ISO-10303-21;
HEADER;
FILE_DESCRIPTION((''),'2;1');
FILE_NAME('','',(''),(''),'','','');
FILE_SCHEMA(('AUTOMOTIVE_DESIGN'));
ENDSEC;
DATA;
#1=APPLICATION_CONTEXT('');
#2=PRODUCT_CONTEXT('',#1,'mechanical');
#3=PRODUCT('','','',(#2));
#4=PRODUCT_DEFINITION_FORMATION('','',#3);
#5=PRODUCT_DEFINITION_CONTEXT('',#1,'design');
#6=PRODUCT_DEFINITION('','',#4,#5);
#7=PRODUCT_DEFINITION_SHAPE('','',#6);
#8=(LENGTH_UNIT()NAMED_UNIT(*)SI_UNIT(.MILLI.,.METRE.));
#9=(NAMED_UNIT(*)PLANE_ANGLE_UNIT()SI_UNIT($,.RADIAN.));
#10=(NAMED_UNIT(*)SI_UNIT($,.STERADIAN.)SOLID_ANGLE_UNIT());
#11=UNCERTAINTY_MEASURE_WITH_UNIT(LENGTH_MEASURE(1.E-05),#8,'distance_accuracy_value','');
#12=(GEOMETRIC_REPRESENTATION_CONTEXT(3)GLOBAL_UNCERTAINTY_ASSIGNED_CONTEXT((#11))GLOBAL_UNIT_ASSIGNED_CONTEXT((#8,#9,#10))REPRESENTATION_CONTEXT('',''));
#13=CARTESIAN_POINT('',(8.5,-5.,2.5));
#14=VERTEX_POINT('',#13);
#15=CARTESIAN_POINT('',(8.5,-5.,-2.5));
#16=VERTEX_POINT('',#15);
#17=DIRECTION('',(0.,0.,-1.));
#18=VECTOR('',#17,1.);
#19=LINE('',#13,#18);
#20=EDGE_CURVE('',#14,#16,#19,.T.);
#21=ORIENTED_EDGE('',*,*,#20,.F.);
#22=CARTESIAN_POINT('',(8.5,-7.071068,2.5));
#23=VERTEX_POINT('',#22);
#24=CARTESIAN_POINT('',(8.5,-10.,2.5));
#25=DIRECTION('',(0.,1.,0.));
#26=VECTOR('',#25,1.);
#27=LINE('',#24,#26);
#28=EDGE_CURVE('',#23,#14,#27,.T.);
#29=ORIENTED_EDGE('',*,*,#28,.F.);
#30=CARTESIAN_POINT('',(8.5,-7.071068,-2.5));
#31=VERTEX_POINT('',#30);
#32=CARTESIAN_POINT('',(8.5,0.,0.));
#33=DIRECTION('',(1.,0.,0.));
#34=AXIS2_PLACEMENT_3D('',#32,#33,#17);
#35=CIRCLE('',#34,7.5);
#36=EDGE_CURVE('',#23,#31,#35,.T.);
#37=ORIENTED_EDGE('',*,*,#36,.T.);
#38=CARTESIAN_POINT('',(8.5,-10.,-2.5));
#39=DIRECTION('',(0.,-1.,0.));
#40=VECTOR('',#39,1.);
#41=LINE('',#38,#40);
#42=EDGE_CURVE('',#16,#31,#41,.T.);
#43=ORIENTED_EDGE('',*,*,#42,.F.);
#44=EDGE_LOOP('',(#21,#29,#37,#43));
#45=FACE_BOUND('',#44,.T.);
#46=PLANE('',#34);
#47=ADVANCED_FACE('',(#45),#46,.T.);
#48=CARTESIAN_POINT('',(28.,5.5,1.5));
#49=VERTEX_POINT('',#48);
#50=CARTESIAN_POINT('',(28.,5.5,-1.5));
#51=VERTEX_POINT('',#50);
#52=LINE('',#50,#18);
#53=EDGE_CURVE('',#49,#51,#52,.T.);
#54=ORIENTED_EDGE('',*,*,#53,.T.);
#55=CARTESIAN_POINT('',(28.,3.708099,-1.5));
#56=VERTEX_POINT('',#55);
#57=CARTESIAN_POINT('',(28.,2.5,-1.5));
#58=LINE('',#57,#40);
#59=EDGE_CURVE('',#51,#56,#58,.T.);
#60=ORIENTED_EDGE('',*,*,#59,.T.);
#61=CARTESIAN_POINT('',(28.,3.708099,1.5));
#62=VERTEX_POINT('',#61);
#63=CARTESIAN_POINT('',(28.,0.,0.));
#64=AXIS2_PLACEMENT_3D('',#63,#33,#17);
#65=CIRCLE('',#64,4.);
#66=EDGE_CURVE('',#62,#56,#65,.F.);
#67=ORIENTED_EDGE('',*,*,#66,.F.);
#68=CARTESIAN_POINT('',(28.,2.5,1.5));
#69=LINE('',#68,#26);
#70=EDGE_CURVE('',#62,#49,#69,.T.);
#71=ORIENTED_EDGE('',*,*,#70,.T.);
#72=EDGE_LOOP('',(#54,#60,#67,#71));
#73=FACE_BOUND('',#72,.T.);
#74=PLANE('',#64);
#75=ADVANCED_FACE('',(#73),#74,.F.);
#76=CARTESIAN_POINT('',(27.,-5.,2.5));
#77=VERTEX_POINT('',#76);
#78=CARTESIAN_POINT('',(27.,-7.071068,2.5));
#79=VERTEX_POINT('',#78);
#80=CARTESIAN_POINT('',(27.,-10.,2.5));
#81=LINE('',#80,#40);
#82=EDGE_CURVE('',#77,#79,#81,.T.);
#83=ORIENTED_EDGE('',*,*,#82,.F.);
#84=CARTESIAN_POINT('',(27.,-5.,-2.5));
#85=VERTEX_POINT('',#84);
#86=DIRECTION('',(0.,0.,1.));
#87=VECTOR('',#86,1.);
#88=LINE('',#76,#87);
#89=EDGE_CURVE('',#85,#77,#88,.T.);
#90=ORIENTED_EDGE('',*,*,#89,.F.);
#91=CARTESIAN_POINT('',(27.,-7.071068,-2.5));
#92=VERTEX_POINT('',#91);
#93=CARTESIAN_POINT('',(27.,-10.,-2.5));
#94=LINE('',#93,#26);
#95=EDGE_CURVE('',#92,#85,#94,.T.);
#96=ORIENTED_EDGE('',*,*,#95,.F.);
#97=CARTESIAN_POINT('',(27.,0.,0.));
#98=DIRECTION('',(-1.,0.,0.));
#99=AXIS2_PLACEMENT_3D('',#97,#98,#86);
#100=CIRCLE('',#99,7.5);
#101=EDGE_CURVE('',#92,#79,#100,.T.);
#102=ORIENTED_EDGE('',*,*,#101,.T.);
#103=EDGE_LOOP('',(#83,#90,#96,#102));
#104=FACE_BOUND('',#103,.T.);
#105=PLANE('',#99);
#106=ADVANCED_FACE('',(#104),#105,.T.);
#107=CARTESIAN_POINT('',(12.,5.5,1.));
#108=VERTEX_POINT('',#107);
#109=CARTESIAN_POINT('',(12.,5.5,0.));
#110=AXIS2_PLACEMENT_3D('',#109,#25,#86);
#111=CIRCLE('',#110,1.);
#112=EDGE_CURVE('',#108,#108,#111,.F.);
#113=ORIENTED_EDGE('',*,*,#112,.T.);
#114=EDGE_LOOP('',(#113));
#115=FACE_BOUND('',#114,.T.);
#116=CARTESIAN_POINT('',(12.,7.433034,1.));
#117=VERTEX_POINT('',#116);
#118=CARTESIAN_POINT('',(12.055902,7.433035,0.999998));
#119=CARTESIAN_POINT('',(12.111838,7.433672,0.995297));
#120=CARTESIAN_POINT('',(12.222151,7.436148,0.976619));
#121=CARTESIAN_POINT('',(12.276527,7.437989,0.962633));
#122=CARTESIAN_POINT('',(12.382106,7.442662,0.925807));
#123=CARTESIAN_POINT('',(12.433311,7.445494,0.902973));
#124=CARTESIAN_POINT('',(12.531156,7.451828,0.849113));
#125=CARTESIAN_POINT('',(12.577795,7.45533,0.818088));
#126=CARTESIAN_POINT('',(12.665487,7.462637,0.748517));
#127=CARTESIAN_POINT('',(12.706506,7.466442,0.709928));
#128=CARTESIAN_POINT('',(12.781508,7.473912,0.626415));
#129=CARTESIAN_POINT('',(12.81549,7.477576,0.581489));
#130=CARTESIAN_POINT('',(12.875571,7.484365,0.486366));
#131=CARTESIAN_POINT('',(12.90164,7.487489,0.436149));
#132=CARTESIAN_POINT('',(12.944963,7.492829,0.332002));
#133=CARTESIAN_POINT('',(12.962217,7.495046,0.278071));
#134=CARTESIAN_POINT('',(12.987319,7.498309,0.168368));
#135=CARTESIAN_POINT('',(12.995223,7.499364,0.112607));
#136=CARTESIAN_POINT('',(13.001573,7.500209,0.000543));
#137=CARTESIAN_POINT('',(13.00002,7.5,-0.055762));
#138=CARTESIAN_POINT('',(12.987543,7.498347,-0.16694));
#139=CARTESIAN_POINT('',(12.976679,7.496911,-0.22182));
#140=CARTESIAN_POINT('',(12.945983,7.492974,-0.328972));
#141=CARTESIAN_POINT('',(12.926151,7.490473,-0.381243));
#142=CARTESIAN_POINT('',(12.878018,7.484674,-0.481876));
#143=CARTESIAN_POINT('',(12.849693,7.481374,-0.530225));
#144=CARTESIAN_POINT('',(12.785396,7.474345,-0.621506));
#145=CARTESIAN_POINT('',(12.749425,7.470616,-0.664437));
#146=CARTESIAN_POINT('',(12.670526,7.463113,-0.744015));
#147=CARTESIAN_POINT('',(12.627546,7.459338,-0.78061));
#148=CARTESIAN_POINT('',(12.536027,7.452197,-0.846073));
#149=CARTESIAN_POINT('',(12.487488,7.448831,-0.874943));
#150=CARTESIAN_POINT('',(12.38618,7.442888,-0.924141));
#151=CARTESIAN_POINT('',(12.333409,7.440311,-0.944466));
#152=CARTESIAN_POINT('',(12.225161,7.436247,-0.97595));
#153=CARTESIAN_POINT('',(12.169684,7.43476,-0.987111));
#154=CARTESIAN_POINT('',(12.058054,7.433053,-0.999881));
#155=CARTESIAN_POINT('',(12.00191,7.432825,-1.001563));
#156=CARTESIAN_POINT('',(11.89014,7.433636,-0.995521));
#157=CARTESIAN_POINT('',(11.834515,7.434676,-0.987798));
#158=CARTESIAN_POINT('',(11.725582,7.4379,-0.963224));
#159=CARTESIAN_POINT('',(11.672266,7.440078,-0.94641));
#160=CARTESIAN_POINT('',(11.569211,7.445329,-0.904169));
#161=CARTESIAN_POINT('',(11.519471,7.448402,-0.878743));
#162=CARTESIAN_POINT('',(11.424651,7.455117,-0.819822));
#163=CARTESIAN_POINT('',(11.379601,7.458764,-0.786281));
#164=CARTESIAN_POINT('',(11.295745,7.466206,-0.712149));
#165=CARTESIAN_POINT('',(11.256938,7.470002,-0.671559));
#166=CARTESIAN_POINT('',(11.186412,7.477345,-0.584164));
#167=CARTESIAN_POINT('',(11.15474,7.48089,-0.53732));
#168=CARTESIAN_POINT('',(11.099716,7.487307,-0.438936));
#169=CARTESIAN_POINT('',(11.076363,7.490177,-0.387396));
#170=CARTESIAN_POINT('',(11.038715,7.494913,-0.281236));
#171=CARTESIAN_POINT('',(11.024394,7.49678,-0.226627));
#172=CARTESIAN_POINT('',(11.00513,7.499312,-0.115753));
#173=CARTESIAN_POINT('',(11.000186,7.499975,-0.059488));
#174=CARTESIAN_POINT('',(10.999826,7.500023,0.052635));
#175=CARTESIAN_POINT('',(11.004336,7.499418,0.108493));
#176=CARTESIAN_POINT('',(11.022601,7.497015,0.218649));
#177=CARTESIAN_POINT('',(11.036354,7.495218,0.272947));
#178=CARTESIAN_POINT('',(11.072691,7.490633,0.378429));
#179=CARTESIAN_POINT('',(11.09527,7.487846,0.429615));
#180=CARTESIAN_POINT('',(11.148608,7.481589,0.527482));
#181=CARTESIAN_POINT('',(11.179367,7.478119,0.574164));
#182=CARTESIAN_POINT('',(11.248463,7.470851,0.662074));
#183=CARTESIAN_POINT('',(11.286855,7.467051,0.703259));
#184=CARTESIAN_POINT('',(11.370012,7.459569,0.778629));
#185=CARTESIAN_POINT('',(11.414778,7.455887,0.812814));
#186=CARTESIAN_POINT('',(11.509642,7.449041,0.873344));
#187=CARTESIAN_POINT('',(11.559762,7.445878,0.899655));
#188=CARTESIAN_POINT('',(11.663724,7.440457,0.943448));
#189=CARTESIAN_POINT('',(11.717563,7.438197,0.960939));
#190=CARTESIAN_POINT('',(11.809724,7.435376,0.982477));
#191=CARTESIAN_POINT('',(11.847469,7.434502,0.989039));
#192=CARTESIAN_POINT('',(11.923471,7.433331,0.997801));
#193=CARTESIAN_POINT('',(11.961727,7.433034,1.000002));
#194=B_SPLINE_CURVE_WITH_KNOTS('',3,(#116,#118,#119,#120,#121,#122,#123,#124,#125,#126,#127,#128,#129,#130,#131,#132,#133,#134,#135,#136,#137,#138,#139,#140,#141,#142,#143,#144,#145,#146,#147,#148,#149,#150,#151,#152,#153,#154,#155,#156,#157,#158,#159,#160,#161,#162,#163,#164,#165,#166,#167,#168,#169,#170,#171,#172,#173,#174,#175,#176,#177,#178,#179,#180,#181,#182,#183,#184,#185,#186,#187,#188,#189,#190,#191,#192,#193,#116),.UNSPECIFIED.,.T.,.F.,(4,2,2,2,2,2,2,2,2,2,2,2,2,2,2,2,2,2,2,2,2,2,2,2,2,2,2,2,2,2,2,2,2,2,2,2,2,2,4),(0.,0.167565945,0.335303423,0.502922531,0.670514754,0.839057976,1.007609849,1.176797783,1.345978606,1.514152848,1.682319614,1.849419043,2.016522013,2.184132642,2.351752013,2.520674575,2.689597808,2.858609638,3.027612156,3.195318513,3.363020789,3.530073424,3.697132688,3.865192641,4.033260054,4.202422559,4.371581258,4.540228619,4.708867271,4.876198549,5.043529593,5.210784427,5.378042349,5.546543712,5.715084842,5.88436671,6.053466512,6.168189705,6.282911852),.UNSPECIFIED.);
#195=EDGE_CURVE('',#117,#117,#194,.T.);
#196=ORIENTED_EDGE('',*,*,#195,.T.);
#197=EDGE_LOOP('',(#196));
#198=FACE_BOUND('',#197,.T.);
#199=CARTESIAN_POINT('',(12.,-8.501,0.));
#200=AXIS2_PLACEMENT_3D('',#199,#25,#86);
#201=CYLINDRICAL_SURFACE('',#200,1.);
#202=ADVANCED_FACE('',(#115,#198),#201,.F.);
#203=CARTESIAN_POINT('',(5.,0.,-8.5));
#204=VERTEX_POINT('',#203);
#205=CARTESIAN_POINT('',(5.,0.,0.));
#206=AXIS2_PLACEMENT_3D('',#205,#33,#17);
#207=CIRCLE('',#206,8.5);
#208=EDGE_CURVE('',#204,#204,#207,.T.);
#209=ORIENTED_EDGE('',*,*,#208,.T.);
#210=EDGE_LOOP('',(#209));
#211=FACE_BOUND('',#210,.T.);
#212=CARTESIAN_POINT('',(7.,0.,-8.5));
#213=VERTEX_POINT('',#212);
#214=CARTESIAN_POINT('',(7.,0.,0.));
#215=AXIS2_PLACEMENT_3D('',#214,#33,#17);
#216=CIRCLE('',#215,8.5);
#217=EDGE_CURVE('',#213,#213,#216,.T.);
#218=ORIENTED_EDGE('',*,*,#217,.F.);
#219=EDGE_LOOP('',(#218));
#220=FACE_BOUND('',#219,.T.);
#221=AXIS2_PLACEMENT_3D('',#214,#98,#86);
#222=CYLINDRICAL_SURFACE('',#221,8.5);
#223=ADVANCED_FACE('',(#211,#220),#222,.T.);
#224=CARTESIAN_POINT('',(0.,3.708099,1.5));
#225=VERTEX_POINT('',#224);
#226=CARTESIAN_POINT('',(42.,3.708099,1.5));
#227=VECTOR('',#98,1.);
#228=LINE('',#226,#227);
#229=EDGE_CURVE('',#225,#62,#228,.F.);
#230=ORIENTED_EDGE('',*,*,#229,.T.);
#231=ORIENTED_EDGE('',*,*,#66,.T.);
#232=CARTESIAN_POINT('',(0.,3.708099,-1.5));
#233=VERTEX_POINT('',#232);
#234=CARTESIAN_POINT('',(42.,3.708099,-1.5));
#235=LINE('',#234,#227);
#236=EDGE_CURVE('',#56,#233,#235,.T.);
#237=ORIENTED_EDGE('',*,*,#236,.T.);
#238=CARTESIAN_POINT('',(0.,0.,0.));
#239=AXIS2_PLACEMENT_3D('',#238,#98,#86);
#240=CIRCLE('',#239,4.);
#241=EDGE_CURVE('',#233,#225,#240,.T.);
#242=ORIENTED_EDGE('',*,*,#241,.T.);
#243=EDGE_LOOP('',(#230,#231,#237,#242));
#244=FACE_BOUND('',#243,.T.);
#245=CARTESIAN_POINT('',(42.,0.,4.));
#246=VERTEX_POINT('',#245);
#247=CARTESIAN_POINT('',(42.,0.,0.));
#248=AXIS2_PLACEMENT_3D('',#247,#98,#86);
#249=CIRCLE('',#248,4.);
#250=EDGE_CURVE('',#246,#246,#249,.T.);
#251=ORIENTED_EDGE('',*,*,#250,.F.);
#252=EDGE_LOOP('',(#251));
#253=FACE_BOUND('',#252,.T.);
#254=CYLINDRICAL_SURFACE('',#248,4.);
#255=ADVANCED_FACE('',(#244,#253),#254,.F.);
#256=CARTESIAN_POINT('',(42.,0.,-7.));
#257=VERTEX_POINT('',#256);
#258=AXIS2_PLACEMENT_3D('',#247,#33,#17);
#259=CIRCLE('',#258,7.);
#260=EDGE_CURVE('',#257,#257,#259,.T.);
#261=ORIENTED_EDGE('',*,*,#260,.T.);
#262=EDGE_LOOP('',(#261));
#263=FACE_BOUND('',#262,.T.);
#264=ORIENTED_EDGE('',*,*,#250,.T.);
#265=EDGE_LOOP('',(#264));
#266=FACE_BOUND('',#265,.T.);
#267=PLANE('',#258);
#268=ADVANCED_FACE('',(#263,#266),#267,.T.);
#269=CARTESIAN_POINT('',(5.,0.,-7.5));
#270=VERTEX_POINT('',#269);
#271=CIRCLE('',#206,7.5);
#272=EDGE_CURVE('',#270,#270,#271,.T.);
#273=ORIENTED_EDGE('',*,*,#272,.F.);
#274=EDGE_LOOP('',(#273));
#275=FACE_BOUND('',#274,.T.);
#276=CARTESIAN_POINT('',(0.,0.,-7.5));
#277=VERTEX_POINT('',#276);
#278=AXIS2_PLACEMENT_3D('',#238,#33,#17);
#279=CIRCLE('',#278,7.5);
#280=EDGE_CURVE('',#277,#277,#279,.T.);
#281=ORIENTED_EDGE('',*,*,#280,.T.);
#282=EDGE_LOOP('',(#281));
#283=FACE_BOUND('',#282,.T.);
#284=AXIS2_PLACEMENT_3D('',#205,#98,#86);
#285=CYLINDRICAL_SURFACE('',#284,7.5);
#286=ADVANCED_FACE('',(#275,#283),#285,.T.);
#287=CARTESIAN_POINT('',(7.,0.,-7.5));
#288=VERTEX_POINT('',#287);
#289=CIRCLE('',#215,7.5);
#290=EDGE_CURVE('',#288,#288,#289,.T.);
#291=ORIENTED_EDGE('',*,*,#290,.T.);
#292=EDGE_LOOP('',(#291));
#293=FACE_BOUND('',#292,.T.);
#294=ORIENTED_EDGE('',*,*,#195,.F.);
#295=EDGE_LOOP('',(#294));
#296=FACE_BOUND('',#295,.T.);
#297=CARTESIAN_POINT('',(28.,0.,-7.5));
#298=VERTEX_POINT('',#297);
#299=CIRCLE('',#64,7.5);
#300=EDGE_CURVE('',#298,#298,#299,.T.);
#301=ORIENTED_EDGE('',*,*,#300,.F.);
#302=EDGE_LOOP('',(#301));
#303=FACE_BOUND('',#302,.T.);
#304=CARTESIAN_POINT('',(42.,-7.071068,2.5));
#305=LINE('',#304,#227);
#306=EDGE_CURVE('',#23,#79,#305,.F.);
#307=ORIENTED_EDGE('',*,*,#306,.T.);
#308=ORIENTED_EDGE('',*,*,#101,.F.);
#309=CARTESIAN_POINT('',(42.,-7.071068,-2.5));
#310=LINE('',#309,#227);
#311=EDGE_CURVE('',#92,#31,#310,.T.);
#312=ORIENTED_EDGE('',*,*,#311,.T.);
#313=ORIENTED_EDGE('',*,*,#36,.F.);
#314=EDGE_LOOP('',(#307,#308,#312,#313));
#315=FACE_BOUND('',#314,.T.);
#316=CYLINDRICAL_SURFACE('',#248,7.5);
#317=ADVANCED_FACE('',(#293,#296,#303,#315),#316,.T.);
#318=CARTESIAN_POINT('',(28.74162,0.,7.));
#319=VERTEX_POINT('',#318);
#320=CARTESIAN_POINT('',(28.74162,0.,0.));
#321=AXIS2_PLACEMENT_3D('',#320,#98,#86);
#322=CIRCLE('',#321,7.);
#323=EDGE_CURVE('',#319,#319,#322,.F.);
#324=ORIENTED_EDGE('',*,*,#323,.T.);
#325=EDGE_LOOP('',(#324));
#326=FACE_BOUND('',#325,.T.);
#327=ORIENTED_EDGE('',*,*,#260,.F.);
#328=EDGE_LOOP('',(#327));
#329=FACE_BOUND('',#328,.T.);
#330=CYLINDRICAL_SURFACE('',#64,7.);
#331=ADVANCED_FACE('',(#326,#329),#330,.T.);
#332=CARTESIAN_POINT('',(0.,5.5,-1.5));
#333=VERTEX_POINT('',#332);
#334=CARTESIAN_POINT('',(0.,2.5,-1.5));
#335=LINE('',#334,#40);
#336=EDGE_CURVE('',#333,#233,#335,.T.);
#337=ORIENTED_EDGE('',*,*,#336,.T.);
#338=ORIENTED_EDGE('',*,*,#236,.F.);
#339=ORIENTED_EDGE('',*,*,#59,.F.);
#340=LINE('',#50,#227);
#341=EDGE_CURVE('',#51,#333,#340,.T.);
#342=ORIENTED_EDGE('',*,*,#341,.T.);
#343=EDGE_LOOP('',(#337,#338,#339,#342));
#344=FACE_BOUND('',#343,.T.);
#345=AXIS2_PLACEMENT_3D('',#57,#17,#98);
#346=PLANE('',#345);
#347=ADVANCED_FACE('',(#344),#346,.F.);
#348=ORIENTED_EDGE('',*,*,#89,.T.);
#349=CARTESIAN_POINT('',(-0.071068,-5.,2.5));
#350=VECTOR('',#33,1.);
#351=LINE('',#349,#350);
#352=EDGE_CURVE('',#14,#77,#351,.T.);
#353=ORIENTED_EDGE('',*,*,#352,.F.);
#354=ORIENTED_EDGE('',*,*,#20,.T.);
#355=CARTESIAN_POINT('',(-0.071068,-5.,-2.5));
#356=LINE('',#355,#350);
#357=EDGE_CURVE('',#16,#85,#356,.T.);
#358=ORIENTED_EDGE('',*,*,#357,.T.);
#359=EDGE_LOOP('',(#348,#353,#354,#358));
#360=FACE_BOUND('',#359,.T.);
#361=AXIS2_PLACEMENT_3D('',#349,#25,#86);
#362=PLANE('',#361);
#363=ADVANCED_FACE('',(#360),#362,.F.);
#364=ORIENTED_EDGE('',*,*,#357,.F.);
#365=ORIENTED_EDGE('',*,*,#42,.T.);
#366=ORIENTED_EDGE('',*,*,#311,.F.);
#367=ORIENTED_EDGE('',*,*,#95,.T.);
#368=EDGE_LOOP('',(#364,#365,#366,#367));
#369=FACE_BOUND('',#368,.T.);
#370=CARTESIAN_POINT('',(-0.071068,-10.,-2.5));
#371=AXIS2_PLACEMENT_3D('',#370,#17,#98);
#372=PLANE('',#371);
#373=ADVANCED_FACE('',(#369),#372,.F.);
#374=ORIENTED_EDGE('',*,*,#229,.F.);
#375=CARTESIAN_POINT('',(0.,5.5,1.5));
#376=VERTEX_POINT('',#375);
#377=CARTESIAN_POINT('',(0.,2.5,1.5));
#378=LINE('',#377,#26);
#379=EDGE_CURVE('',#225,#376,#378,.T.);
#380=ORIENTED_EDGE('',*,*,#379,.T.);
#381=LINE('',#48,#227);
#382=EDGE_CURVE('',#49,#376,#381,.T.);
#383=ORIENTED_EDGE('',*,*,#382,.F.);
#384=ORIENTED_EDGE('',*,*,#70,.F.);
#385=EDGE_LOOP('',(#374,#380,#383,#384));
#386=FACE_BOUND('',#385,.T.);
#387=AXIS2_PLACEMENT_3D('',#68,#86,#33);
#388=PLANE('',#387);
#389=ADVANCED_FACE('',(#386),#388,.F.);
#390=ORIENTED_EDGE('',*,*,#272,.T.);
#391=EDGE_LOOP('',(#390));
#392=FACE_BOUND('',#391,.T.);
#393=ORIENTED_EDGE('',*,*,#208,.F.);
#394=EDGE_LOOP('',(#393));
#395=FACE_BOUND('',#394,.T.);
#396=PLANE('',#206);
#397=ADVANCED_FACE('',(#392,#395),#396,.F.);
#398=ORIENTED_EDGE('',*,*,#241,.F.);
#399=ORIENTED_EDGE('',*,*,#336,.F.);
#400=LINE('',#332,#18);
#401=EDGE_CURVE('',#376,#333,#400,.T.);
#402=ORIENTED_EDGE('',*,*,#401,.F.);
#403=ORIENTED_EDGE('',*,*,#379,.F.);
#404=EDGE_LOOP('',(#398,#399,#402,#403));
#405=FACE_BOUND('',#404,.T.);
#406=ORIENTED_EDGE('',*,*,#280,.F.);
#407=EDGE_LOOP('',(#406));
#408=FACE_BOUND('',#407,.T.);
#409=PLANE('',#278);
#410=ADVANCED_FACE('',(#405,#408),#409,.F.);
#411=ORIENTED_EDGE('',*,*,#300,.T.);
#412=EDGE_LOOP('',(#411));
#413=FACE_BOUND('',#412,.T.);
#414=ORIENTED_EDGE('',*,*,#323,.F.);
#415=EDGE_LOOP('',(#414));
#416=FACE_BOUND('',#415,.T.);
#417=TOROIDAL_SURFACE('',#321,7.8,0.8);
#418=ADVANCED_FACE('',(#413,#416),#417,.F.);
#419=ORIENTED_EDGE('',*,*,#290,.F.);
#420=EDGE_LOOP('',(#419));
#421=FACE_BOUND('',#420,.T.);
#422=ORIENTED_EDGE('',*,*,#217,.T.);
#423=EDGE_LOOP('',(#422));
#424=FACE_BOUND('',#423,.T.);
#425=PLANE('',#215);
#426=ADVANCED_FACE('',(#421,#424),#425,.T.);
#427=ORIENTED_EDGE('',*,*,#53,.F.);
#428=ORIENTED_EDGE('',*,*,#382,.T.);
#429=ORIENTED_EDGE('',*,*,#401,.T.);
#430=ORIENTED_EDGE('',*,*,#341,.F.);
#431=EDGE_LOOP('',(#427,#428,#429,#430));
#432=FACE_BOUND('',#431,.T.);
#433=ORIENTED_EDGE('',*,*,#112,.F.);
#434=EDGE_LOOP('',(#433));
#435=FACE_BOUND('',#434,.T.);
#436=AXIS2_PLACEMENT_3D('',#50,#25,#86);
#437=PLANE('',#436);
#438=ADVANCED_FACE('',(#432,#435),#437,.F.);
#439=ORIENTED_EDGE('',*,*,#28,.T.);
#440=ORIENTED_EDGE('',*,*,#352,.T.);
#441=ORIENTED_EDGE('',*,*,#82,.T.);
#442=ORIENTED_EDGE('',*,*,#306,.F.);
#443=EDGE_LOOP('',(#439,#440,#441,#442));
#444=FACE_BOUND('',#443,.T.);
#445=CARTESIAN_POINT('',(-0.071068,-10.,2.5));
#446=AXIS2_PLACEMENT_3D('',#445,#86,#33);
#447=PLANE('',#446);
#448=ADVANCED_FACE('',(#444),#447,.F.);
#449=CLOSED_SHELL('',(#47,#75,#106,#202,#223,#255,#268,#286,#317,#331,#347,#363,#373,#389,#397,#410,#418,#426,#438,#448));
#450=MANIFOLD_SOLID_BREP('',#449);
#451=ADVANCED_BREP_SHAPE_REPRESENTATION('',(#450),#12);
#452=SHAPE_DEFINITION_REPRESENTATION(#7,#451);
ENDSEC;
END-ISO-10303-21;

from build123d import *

# Parameters (mm, degrees)
SKETCH1_R               = 7.5
BOSS_EXTRUDE1_DEPTH     = 5
SKETCH2_R               = 8.5
BOSS_EXTRUDE2_DEPTH     = 2
SKETCH3_R               = 7.5
BOSS_EXTRUDE3_DEPTH     = 35
SKETCH4_R               = 4
CUT_EXTRUDE1_DEPTH      = 44.686382318
CUT_EXTRUDE3_REACH      = 47.741
CUT_EXTRUDE3_END_RADIUS = 4
SKETCH7_R               = 1
CUT_EXTRUDE6_START      = -14
SKETCH9_R               = 7.5
SKETCH9_R_2             = 7
CUT_EXTRUDE6_DEPTH      = 14
FILLET1_R               = 0.8
SKETCH10_W              = 3
SKETCH10_H              = 3
CUT_EXTRUDE7_DEPTH      = 28
SKETCH12_W              = 5
SKETCH12_H              = 5
CUT_EXTRUDE8_DEPTH      = 18.5


with BuildPart() as part:
    # Sketch1 → Boss-Extrude1 (new body)
    with BuildSketch(Plane(origin=(0, 0, 0), x_dir=(0, 0, -1), z_dir=(1, 0, 0))):
        Circle(SKETCH1_R)
    extrude(amount=BOSS_EXTRUDE1_DEPTH)

    # Sketch2 → Boss-Extrude2 (add)
    with BuildSketch(Plane(origin=(5, 0, 0), x_dir=(0, 0, -1), z_dir=(1, 0, 0))):
        Circle(SKETCH2_R)
    extrude(amount=BOSS_EXTRUDE2_DEPTH)

    # Sketch3 → Boss-Extrude3 (add)
    with BuildSketch(Plane(origin=(7, 0, 0), x_dir=(0, 0, -1), z_dir=(1, 0, 0))):
        Circle(SKETCH3_R)
    extrude(amount=BOSS_EXTRUDE3_DEPTH)

    # Sketch4 → Cut-Extrude1 (cut, through all)
    with BuildSketch(Plane.ZY):
        Circle(SKETCH4_R)
    extrude(amount=-CUT_EXTRUDE1_DEPTH, mode=Mode.SUBTRACT)

    # Cut-Extrude3: up to this cylinder (the profile starts outside it)
    cut_extrude3_end = Plane(origin=(12, 0, 0), z_dir=(-1, 0, 0)) * Cylinder(CUT_EXTRUDE3_END_RADIUS, 104.482, mode=Mode.PRIVATE)
    # Sketch7 → Cut-Extrude3 (cut, up to the surface)
    with BuildSketch(Plane(origin=(0, 7.5, 0), x_dir=(1, 0, 0), z_dir=(0, 1, 0)), mode=Mode.PRIVATE) as cut_extrude3_sk1:
        with Locations(Location((12, 0, 0), (0, 0, 270))):
            Circle(SKETCH7_R)
    cut_extrude3_tool1 = extrude(cut_extrude3_sk1.sketch, amount=-CUT_EXTRUDE3_REACH, mode=Mode.PRIVATE) - cut_extrude3_end
    add(cut_extrude3_tool1.solids().sort_by_distance((12, 7.5, 0))[0], mode=Mode.SUBTRACT)

    # Sketch9 → Cut-Extrude6 (cut)
    with BuildSketch(Plane(origin=(42, 0, 0), x_dir=(0, 0, -1), z_dir=(1, 0, 0)).offset(CUT_EXTRUDE6_START)):
        Circle(SKETCH9_R)
        Circle(SKETCH9_R_2, mode=Mode.SUBTRACT)
    extrude(amount=CUT_EXTRUDE6_DEPTH, mode=Mode.SUBTRACT)

    # Fillet1
    # the kernel refuses this fillet: 0.8 mm, written as the material it adds along each edge
    with BuildSketch(Plane(origin=(28, 0, 0), x_dir=(0, 0, -1), z_dir=(0, -1, 0))) as fillet1_piece_1:
        with BuildLine():
            CenterArc((7.8, 0.741619849), FILLET1_R, 180, 67.975687163)
            Line((7, 0.741619849), (6.984, 0.741619849))
            Line((6.984, 0.741619849), (6.984, 0))
            Line((6.984, 0), (7, -0.016))
            ThreePointArc((7, -0.016), (7.25, -0.016), (7.494, -0.014832397))
            Line((7.494, -0.014832397), (7.5, 0))
        make_face()
    revolve(axis=Axis((28, 0, 0), (1, 0, 0)))

    # Sketch10 → Cut-Extrude7 (cut)
    with BuildSketch(Plane.ZY):
        with Locations((0, 4)):
            Rectangle(SKETCH10_W, SKETCH10_H)
    extrude(amount=-CUT_EXTRUDE7_DEPTH, mode=Mode.SUBTRACT)

    # Sketch12 → Cut-Extrude8 (cut)
    with BuildSketch(Plane(origin=(27, 0, 0), x_dir=(0, 0, -1), z_dir=(1, 0, 0))):
        with Locations((0, -7.5)):
            Rectangle(SKETCH12_W, SKETCH12_H)
    extrude(amount=-CUT_EXTRUDE8_DEPTH, mode=Mode.SUBTRACT)


solid = part.part
